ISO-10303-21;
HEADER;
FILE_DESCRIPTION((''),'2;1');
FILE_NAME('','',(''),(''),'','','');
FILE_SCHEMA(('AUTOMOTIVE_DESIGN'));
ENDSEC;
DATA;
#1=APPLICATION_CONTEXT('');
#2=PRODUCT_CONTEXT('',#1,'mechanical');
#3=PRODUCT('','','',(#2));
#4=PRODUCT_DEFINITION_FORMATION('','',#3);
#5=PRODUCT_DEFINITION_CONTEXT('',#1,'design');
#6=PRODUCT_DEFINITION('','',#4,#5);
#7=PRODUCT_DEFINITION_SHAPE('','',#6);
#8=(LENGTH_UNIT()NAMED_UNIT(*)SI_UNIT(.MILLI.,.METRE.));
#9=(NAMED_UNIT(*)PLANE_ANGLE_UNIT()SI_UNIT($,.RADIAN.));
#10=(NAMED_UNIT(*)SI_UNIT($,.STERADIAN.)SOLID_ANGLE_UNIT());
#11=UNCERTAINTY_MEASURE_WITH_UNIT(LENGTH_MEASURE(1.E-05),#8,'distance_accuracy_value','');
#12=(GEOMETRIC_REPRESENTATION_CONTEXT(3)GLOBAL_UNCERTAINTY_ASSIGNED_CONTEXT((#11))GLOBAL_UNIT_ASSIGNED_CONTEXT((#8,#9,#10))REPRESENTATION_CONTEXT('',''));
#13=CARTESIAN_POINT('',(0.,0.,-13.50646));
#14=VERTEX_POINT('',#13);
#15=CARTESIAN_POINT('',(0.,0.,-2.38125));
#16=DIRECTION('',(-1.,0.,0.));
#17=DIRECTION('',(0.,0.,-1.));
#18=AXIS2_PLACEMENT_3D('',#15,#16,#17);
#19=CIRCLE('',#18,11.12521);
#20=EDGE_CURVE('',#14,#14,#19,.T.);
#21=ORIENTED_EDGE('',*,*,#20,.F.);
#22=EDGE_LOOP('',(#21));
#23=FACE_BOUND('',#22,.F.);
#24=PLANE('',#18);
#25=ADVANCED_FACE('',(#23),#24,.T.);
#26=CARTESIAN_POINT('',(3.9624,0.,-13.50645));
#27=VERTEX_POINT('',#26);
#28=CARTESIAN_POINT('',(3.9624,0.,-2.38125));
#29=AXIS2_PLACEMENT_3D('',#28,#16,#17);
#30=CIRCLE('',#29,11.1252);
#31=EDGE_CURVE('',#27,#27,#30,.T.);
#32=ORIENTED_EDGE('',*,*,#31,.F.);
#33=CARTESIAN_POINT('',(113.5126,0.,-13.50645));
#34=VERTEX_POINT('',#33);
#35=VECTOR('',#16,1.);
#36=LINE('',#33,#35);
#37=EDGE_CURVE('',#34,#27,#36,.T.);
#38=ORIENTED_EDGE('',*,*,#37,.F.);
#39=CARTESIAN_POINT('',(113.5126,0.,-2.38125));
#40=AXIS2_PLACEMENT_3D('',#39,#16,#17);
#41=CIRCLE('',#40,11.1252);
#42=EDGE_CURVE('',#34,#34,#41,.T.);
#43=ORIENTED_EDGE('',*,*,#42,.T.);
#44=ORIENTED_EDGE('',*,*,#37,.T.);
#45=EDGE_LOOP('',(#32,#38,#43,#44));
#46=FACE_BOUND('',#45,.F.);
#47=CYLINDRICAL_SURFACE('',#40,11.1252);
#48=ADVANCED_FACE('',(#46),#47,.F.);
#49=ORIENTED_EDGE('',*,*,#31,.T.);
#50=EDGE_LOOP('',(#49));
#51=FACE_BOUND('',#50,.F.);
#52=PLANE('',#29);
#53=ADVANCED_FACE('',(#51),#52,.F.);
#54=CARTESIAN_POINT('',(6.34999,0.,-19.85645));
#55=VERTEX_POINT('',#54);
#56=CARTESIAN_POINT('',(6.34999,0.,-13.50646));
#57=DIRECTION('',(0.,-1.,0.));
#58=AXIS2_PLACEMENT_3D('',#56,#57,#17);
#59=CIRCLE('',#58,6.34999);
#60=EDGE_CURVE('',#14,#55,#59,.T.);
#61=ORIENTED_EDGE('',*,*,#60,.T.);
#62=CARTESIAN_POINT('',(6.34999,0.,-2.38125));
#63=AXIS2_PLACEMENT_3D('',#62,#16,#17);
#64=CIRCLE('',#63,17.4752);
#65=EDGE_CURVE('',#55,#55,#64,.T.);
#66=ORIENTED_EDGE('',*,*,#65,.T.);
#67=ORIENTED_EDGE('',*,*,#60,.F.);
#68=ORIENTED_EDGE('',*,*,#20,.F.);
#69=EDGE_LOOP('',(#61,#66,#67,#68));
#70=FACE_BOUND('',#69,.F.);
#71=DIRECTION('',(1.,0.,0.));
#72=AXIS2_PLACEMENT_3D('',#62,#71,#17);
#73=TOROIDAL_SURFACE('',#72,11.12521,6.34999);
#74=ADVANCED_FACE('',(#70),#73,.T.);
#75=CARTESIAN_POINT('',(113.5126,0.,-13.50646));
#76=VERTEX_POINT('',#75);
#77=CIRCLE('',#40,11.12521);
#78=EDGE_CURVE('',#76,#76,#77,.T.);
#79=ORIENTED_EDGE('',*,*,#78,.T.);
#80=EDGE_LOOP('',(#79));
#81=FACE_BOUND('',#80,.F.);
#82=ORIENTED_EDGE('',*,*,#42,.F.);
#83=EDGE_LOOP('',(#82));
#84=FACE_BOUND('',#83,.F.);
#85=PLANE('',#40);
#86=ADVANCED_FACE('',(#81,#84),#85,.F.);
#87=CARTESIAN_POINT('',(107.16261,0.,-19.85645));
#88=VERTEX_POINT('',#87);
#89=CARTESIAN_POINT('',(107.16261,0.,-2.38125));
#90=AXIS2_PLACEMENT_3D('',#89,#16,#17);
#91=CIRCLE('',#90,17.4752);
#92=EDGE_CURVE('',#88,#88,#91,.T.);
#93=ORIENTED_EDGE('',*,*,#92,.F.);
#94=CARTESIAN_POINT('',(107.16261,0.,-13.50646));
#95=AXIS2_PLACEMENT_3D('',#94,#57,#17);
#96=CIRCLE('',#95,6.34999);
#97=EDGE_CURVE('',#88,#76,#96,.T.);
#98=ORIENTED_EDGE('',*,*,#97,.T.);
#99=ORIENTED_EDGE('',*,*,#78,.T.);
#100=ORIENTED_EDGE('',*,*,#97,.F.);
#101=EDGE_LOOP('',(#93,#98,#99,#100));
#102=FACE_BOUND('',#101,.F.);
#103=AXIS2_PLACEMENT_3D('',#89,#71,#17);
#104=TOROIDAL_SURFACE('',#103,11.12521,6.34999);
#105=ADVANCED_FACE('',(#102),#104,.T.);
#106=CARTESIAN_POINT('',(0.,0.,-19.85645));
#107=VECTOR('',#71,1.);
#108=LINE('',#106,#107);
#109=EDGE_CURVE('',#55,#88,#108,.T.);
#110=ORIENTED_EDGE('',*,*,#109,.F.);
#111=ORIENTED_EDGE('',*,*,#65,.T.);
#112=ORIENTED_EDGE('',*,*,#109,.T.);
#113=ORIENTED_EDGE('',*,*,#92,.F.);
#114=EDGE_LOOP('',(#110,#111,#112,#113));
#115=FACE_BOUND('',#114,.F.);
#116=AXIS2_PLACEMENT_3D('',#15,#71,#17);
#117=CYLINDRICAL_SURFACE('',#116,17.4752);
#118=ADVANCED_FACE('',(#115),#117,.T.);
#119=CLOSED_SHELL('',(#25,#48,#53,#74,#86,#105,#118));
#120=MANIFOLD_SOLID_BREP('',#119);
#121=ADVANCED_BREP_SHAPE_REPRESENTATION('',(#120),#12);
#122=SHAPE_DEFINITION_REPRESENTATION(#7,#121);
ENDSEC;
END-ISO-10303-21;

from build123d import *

# Parameters (mm, degrees)
F2_R = 6.34999


# Not quite as in the source:
# - a fillet or chamfer is up to 0.001 mm smaller than in the source, because OpenCascade refuses the exact size


with BuildPart() as f1:
    # F0 (on Front) → F1 (revolve)
    with BuildSketch(Plane.XZ):
        Polygon((3.9624, -2.38125), (0, -2.38125), (0, -19.85645), (113.5126, -19.85645), (113.5126, -13.50645), (3.9624, -13.50645), align=None)
    revolve(axis=Axis((1.9812, 0, -2.38125), (-1, 0, 0)))

    # F2 (radius 6.35 in the source; OpenCascade refuses exactly that, so slightly less here)
    f2_edges = [f1.edges().sort_by_distance(p)[0] for p in [
        (0, 0, 15.09395),
        (113.5126, 0, 15.09395),
        (56.7563, 0, -19.85645),
    ]]
    fillet(f2_edges, radius=F2_R)


solid = f1.part
